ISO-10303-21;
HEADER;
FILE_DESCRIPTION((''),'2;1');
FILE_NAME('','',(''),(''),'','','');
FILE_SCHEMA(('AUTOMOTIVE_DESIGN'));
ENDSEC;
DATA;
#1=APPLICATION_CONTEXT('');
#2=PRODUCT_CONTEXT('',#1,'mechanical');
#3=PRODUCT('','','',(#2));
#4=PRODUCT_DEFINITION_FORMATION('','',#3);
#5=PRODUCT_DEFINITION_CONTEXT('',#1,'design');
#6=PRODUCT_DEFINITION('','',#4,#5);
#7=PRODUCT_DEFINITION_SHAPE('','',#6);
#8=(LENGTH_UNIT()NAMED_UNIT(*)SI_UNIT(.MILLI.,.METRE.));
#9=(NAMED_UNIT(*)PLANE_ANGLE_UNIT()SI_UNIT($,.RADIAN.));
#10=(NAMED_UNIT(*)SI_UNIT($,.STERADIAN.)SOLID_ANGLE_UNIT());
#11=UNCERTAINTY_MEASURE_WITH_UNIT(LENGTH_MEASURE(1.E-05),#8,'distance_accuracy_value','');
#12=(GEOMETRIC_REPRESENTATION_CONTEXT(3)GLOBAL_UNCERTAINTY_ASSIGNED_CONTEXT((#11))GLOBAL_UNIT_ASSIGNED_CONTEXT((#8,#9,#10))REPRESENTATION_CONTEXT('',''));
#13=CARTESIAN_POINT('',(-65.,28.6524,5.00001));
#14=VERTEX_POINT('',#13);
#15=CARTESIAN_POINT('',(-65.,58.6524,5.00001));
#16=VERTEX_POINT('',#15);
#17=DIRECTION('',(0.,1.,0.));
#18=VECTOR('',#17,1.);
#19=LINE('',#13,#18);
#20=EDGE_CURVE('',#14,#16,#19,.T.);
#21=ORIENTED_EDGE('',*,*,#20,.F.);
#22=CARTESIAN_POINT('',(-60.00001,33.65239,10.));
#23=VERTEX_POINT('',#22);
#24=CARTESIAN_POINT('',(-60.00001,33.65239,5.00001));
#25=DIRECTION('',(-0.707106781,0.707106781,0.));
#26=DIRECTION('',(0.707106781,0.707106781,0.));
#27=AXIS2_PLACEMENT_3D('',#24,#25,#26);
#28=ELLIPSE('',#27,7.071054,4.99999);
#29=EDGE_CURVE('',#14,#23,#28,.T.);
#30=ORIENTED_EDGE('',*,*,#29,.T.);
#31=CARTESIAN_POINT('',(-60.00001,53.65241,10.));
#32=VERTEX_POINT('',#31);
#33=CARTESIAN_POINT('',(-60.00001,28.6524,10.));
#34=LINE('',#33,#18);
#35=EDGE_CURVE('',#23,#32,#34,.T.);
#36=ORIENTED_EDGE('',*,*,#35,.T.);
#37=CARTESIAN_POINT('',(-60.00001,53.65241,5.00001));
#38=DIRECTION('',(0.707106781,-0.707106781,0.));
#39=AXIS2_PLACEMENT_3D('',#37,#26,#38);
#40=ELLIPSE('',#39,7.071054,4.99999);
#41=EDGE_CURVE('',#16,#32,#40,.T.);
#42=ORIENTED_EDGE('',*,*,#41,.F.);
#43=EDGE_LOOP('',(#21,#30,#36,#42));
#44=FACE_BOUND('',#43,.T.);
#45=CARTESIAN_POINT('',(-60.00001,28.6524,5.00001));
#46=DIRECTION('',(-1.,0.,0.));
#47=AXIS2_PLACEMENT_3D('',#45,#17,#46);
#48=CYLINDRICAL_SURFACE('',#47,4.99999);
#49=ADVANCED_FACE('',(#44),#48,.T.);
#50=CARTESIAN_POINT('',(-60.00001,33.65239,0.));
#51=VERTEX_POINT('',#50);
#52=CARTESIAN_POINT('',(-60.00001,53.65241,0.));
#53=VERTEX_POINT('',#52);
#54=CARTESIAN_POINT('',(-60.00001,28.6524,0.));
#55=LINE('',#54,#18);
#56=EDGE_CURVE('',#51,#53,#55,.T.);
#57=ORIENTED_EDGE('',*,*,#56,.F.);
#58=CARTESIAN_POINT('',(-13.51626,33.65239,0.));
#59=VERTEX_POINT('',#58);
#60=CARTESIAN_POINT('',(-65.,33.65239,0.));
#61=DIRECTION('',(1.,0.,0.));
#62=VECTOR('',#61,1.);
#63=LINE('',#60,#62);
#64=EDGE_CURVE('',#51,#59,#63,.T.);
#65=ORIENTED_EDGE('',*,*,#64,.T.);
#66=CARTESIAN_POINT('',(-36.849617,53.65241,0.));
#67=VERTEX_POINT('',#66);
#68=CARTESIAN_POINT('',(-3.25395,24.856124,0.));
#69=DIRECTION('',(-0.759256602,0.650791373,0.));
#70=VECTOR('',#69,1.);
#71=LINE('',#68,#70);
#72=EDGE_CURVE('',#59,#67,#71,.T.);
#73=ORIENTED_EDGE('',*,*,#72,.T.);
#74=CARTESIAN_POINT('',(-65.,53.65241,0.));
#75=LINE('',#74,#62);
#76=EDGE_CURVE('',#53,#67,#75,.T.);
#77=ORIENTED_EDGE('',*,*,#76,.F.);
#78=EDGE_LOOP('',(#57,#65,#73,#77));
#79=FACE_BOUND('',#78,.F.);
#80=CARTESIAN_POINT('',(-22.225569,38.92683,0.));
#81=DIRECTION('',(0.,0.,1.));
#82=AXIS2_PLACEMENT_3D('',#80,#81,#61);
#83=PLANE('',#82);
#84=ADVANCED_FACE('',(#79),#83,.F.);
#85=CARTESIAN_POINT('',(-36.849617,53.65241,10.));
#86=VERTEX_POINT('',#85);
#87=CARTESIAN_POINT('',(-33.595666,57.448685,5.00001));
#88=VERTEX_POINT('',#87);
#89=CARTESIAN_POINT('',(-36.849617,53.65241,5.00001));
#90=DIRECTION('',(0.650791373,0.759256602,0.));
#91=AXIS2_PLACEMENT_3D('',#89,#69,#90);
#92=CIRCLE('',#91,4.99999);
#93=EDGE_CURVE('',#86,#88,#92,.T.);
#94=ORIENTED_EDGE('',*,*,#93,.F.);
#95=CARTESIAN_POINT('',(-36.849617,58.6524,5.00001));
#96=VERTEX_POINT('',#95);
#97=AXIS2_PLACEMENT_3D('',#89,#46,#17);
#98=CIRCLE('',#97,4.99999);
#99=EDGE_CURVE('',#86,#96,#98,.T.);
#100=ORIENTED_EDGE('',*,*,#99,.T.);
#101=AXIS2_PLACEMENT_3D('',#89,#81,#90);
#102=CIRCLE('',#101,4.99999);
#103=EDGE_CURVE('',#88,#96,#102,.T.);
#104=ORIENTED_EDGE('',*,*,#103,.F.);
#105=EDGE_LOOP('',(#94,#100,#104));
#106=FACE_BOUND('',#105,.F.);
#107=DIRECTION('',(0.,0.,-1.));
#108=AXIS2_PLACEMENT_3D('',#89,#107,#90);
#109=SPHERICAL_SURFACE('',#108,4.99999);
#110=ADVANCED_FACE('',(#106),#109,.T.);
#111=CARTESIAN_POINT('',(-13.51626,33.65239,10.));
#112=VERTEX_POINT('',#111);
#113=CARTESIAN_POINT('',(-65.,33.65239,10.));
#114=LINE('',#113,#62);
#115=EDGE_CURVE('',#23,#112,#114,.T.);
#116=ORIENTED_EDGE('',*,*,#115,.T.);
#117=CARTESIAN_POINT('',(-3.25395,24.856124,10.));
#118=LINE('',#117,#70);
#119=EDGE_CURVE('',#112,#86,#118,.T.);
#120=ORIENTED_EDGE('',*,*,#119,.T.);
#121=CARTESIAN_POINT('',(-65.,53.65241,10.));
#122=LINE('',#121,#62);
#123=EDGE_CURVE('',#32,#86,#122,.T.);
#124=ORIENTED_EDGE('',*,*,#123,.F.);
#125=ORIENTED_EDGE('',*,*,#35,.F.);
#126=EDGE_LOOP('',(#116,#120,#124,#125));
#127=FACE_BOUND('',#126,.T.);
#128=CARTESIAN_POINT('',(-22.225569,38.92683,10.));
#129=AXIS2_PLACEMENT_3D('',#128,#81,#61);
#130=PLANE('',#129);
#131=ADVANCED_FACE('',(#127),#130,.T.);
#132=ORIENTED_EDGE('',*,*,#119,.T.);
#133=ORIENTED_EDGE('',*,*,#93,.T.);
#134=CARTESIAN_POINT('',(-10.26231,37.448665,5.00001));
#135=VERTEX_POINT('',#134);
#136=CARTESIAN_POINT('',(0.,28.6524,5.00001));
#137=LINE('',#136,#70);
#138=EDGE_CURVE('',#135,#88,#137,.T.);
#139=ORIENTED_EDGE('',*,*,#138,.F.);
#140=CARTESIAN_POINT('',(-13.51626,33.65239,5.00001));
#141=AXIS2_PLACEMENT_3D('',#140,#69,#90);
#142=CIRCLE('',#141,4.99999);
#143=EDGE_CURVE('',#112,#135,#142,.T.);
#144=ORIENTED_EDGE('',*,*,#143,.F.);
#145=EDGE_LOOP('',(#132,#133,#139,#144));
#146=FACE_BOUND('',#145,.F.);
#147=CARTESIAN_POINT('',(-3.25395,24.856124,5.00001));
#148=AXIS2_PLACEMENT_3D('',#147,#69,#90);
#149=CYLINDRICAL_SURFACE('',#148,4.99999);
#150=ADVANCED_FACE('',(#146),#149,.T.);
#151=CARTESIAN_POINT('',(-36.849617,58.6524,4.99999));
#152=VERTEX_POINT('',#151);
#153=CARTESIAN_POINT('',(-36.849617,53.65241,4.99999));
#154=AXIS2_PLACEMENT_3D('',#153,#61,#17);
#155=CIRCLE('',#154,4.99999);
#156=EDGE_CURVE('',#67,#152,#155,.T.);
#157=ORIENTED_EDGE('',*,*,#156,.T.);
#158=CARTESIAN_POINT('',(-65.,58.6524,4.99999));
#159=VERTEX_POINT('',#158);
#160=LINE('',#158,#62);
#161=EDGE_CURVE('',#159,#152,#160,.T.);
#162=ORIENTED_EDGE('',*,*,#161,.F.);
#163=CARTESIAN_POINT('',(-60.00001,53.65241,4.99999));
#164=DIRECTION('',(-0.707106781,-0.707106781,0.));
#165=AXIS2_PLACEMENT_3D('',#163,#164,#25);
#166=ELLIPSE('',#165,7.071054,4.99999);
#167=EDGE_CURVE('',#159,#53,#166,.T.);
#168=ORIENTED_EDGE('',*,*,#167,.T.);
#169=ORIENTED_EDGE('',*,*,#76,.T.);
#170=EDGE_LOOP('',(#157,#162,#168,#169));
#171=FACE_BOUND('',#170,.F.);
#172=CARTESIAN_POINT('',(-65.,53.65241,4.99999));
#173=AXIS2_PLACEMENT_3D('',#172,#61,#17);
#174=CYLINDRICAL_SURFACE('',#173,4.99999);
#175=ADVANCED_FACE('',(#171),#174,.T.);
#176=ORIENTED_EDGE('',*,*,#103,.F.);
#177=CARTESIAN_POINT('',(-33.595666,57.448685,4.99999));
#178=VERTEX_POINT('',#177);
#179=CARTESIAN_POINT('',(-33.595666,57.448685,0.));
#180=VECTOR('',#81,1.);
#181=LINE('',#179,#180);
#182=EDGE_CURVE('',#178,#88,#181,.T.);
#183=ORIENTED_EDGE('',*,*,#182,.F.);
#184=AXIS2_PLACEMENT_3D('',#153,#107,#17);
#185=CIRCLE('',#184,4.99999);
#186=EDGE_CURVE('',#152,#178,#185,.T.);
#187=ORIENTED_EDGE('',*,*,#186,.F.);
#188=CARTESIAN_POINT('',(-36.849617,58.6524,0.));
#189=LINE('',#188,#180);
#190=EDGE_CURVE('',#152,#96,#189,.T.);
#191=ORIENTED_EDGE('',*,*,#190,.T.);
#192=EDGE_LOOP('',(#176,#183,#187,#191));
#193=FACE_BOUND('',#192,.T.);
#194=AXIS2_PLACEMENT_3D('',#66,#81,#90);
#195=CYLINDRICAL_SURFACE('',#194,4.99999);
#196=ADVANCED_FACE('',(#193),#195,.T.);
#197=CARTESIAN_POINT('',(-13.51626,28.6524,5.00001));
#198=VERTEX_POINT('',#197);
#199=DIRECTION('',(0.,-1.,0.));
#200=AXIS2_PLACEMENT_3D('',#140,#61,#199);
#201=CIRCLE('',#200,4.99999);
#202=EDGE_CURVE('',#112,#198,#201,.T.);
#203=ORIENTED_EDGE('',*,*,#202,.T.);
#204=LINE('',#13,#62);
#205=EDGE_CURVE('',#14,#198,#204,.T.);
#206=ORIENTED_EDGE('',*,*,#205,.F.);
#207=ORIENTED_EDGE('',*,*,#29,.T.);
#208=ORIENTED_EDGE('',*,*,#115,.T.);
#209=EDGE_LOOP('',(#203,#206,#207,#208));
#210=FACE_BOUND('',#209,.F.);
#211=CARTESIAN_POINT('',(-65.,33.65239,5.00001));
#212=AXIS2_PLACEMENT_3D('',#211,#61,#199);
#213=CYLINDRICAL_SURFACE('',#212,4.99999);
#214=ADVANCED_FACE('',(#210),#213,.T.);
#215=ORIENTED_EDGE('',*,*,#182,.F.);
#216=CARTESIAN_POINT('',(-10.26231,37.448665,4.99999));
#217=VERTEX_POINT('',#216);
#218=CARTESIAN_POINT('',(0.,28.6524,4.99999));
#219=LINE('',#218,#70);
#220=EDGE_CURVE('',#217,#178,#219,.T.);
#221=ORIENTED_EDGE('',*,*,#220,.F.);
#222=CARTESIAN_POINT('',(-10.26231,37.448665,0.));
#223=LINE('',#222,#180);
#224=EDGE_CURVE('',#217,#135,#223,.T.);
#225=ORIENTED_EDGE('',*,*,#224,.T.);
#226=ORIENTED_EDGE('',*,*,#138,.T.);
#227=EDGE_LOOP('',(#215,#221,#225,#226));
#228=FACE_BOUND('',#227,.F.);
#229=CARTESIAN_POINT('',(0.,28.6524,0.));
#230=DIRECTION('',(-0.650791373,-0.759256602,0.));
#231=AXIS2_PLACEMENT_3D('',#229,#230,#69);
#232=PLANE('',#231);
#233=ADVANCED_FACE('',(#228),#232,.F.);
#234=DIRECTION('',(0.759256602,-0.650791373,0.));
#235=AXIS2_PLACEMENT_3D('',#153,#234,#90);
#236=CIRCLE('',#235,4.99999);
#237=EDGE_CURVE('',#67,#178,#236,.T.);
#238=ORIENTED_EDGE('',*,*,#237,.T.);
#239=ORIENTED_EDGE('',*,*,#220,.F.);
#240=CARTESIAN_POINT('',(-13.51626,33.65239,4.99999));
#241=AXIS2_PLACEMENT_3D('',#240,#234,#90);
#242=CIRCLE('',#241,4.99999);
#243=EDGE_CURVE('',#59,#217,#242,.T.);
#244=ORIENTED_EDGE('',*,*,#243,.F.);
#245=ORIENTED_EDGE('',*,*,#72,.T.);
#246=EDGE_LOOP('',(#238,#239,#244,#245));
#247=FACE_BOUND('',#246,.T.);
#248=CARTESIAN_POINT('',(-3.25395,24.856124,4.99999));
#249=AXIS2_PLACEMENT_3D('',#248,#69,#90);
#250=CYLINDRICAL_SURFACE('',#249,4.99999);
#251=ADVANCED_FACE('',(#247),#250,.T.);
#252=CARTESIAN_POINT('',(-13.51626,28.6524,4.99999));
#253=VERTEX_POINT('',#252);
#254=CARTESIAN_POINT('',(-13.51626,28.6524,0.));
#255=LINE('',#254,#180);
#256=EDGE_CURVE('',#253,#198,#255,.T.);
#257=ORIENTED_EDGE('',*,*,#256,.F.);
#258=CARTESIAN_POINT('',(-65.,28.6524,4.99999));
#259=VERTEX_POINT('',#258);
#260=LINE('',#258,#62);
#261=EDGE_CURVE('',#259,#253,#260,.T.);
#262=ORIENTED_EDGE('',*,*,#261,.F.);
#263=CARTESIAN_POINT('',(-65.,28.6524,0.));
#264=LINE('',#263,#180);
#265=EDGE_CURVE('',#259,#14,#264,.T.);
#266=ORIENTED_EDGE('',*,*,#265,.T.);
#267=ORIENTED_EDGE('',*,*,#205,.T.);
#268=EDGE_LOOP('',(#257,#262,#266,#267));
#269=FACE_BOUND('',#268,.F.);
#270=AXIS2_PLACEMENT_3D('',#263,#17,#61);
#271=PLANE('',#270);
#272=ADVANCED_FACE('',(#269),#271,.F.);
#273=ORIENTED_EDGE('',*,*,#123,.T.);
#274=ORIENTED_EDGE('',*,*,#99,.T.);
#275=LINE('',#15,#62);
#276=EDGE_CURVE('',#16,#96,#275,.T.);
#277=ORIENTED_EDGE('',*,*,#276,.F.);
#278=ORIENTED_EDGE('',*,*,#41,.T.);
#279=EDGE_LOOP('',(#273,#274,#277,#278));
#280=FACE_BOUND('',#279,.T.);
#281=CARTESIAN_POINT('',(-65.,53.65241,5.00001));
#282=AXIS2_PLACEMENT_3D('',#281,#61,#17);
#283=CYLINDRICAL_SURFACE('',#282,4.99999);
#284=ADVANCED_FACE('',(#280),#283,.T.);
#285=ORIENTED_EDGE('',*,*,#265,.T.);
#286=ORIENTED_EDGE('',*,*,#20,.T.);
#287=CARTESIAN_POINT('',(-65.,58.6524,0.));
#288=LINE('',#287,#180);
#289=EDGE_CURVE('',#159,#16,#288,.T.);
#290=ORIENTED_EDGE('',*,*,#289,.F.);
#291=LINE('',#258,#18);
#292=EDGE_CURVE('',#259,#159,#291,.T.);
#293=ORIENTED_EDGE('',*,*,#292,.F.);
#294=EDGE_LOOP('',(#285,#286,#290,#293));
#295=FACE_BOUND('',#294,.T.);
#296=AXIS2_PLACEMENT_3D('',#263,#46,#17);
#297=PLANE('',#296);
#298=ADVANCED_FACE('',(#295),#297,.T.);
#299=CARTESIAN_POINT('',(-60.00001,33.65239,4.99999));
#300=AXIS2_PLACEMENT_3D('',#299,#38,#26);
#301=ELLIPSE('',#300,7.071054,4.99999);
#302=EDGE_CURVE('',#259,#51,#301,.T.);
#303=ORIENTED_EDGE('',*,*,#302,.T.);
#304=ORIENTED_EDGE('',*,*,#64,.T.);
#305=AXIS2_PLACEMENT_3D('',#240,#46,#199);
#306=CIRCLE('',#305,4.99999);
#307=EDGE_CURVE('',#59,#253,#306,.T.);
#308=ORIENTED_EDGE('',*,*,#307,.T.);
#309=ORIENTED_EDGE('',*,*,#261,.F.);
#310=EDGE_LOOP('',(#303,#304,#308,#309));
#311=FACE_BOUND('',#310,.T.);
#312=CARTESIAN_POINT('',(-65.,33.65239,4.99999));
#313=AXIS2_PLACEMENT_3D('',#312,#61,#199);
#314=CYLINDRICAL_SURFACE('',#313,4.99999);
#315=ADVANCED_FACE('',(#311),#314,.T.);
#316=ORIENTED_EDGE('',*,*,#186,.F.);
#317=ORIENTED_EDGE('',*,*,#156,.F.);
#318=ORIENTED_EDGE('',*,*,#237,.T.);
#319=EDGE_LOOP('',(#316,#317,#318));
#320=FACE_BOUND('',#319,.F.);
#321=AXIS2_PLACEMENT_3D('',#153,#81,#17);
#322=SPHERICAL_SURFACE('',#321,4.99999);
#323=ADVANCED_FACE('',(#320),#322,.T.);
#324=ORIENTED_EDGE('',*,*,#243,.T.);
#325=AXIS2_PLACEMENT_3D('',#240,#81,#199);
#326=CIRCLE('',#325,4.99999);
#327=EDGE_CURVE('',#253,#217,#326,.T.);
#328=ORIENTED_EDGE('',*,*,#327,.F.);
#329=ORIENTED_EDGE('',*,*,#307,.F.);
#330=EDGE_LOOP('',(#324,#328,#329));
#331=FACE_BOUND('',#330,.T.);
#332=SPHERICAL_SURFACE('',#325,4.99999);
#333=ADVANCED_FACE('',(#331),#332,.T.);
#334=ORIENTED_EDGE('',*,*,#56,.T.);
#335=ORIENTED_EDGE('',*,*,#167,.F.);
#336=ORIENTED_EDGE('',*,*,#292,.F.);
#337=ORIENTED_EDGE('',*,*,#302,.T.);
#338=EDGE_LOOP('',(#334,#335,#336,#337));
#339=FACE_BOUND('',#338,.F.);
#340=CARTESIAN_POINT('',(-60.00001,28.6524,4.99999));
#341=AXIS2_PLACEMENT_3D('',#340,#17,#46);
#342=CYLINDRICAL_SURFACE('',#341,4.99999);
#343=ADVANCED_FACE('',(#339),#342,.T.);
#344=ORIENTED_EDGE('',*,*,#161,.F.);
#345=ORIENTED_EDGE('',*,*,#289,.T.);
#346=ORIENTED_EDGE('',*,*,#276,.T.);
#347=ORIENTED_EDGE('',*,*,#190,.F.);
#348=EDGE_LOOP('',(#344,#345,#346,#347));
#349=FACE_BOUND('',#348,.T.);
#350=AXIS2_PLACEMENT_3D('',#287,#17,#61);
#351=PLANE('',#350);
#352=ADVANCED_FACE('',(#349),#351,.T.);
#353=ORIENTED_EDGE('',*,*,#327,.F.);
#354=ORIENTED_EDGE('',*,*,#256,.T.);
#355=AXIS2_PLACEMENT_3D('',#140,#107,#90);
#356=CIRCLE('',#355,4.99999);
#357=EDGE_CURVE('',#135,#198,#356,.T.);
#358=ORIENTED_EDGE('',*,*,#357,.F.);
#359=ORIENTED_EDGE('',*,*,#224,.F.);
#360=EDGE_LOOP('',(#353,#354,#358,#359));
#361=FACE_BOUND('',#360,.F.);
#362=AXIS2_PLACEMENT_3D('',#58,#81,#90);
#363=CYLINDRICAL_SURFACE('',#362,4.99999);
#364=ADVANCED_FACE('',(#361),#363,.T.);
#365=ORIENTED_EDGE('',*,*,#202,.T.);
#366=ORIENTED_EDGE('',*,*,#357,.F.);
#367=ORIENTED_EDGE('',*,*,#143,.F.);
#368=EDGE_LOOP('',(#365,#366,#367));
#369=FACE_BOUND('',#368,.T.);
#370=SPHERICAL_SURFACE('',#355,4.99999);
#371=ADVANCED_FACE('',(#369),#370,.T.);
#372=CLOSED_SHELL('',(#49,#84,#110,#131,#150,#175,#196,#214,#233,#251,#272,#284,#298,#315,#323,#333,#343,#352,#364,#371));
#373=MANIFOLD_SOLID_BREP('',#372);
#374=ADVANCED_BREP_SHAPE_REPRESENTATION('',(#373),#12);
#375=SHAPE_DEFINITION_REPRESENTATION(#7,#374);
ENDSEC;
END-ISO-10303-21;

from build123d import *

# Parameters (mm, degrees)
F0_W     = 30
F0_H     = 30
F1_DEPTH = 10
F2_R     = 4.99999


# Not quite as in the source:
# - a fillet or chamfer is up to 0.001 mm smaller than in the source, because OpenCascade refuses the exact size


with BuildPart() as f1:
    # F0 (on Top) → F1 (new body)
    with BuildSketch(Plane.XY):
        Polygon((0, 28.652399919), (-35, 58.652399919), (-35, 28.652399919), align=None)
        with Locations((-50, 43.652399919)):
            Rectangle(F0_W, F0_H)
    extrude(amount=F1_DEPTH)

    # F2 (radius 5 in the source; OpenCascade refuses exactly that, so slightly less here)
    f2_edges = [f1.edges().sort_by_distance(p)[0] for p in [
        (-17.5, 43.6524, 10),
        (-50, 58.6524, 10),
        (-65, 43.6524, 10),
        (-32.5, 28.6524, 10),
        (-32.5, 28.6524, 0),
        (-65, 43.6524, 0),
        (-50, 58.6524, 0),
        (-17.5, 43.6524, 0),
        (-35, 58.6524, 5),
        (0, 28.6524, 5),
    ]]
    fillet(f2_edges, radius=F2_R)


solid = f1.part
